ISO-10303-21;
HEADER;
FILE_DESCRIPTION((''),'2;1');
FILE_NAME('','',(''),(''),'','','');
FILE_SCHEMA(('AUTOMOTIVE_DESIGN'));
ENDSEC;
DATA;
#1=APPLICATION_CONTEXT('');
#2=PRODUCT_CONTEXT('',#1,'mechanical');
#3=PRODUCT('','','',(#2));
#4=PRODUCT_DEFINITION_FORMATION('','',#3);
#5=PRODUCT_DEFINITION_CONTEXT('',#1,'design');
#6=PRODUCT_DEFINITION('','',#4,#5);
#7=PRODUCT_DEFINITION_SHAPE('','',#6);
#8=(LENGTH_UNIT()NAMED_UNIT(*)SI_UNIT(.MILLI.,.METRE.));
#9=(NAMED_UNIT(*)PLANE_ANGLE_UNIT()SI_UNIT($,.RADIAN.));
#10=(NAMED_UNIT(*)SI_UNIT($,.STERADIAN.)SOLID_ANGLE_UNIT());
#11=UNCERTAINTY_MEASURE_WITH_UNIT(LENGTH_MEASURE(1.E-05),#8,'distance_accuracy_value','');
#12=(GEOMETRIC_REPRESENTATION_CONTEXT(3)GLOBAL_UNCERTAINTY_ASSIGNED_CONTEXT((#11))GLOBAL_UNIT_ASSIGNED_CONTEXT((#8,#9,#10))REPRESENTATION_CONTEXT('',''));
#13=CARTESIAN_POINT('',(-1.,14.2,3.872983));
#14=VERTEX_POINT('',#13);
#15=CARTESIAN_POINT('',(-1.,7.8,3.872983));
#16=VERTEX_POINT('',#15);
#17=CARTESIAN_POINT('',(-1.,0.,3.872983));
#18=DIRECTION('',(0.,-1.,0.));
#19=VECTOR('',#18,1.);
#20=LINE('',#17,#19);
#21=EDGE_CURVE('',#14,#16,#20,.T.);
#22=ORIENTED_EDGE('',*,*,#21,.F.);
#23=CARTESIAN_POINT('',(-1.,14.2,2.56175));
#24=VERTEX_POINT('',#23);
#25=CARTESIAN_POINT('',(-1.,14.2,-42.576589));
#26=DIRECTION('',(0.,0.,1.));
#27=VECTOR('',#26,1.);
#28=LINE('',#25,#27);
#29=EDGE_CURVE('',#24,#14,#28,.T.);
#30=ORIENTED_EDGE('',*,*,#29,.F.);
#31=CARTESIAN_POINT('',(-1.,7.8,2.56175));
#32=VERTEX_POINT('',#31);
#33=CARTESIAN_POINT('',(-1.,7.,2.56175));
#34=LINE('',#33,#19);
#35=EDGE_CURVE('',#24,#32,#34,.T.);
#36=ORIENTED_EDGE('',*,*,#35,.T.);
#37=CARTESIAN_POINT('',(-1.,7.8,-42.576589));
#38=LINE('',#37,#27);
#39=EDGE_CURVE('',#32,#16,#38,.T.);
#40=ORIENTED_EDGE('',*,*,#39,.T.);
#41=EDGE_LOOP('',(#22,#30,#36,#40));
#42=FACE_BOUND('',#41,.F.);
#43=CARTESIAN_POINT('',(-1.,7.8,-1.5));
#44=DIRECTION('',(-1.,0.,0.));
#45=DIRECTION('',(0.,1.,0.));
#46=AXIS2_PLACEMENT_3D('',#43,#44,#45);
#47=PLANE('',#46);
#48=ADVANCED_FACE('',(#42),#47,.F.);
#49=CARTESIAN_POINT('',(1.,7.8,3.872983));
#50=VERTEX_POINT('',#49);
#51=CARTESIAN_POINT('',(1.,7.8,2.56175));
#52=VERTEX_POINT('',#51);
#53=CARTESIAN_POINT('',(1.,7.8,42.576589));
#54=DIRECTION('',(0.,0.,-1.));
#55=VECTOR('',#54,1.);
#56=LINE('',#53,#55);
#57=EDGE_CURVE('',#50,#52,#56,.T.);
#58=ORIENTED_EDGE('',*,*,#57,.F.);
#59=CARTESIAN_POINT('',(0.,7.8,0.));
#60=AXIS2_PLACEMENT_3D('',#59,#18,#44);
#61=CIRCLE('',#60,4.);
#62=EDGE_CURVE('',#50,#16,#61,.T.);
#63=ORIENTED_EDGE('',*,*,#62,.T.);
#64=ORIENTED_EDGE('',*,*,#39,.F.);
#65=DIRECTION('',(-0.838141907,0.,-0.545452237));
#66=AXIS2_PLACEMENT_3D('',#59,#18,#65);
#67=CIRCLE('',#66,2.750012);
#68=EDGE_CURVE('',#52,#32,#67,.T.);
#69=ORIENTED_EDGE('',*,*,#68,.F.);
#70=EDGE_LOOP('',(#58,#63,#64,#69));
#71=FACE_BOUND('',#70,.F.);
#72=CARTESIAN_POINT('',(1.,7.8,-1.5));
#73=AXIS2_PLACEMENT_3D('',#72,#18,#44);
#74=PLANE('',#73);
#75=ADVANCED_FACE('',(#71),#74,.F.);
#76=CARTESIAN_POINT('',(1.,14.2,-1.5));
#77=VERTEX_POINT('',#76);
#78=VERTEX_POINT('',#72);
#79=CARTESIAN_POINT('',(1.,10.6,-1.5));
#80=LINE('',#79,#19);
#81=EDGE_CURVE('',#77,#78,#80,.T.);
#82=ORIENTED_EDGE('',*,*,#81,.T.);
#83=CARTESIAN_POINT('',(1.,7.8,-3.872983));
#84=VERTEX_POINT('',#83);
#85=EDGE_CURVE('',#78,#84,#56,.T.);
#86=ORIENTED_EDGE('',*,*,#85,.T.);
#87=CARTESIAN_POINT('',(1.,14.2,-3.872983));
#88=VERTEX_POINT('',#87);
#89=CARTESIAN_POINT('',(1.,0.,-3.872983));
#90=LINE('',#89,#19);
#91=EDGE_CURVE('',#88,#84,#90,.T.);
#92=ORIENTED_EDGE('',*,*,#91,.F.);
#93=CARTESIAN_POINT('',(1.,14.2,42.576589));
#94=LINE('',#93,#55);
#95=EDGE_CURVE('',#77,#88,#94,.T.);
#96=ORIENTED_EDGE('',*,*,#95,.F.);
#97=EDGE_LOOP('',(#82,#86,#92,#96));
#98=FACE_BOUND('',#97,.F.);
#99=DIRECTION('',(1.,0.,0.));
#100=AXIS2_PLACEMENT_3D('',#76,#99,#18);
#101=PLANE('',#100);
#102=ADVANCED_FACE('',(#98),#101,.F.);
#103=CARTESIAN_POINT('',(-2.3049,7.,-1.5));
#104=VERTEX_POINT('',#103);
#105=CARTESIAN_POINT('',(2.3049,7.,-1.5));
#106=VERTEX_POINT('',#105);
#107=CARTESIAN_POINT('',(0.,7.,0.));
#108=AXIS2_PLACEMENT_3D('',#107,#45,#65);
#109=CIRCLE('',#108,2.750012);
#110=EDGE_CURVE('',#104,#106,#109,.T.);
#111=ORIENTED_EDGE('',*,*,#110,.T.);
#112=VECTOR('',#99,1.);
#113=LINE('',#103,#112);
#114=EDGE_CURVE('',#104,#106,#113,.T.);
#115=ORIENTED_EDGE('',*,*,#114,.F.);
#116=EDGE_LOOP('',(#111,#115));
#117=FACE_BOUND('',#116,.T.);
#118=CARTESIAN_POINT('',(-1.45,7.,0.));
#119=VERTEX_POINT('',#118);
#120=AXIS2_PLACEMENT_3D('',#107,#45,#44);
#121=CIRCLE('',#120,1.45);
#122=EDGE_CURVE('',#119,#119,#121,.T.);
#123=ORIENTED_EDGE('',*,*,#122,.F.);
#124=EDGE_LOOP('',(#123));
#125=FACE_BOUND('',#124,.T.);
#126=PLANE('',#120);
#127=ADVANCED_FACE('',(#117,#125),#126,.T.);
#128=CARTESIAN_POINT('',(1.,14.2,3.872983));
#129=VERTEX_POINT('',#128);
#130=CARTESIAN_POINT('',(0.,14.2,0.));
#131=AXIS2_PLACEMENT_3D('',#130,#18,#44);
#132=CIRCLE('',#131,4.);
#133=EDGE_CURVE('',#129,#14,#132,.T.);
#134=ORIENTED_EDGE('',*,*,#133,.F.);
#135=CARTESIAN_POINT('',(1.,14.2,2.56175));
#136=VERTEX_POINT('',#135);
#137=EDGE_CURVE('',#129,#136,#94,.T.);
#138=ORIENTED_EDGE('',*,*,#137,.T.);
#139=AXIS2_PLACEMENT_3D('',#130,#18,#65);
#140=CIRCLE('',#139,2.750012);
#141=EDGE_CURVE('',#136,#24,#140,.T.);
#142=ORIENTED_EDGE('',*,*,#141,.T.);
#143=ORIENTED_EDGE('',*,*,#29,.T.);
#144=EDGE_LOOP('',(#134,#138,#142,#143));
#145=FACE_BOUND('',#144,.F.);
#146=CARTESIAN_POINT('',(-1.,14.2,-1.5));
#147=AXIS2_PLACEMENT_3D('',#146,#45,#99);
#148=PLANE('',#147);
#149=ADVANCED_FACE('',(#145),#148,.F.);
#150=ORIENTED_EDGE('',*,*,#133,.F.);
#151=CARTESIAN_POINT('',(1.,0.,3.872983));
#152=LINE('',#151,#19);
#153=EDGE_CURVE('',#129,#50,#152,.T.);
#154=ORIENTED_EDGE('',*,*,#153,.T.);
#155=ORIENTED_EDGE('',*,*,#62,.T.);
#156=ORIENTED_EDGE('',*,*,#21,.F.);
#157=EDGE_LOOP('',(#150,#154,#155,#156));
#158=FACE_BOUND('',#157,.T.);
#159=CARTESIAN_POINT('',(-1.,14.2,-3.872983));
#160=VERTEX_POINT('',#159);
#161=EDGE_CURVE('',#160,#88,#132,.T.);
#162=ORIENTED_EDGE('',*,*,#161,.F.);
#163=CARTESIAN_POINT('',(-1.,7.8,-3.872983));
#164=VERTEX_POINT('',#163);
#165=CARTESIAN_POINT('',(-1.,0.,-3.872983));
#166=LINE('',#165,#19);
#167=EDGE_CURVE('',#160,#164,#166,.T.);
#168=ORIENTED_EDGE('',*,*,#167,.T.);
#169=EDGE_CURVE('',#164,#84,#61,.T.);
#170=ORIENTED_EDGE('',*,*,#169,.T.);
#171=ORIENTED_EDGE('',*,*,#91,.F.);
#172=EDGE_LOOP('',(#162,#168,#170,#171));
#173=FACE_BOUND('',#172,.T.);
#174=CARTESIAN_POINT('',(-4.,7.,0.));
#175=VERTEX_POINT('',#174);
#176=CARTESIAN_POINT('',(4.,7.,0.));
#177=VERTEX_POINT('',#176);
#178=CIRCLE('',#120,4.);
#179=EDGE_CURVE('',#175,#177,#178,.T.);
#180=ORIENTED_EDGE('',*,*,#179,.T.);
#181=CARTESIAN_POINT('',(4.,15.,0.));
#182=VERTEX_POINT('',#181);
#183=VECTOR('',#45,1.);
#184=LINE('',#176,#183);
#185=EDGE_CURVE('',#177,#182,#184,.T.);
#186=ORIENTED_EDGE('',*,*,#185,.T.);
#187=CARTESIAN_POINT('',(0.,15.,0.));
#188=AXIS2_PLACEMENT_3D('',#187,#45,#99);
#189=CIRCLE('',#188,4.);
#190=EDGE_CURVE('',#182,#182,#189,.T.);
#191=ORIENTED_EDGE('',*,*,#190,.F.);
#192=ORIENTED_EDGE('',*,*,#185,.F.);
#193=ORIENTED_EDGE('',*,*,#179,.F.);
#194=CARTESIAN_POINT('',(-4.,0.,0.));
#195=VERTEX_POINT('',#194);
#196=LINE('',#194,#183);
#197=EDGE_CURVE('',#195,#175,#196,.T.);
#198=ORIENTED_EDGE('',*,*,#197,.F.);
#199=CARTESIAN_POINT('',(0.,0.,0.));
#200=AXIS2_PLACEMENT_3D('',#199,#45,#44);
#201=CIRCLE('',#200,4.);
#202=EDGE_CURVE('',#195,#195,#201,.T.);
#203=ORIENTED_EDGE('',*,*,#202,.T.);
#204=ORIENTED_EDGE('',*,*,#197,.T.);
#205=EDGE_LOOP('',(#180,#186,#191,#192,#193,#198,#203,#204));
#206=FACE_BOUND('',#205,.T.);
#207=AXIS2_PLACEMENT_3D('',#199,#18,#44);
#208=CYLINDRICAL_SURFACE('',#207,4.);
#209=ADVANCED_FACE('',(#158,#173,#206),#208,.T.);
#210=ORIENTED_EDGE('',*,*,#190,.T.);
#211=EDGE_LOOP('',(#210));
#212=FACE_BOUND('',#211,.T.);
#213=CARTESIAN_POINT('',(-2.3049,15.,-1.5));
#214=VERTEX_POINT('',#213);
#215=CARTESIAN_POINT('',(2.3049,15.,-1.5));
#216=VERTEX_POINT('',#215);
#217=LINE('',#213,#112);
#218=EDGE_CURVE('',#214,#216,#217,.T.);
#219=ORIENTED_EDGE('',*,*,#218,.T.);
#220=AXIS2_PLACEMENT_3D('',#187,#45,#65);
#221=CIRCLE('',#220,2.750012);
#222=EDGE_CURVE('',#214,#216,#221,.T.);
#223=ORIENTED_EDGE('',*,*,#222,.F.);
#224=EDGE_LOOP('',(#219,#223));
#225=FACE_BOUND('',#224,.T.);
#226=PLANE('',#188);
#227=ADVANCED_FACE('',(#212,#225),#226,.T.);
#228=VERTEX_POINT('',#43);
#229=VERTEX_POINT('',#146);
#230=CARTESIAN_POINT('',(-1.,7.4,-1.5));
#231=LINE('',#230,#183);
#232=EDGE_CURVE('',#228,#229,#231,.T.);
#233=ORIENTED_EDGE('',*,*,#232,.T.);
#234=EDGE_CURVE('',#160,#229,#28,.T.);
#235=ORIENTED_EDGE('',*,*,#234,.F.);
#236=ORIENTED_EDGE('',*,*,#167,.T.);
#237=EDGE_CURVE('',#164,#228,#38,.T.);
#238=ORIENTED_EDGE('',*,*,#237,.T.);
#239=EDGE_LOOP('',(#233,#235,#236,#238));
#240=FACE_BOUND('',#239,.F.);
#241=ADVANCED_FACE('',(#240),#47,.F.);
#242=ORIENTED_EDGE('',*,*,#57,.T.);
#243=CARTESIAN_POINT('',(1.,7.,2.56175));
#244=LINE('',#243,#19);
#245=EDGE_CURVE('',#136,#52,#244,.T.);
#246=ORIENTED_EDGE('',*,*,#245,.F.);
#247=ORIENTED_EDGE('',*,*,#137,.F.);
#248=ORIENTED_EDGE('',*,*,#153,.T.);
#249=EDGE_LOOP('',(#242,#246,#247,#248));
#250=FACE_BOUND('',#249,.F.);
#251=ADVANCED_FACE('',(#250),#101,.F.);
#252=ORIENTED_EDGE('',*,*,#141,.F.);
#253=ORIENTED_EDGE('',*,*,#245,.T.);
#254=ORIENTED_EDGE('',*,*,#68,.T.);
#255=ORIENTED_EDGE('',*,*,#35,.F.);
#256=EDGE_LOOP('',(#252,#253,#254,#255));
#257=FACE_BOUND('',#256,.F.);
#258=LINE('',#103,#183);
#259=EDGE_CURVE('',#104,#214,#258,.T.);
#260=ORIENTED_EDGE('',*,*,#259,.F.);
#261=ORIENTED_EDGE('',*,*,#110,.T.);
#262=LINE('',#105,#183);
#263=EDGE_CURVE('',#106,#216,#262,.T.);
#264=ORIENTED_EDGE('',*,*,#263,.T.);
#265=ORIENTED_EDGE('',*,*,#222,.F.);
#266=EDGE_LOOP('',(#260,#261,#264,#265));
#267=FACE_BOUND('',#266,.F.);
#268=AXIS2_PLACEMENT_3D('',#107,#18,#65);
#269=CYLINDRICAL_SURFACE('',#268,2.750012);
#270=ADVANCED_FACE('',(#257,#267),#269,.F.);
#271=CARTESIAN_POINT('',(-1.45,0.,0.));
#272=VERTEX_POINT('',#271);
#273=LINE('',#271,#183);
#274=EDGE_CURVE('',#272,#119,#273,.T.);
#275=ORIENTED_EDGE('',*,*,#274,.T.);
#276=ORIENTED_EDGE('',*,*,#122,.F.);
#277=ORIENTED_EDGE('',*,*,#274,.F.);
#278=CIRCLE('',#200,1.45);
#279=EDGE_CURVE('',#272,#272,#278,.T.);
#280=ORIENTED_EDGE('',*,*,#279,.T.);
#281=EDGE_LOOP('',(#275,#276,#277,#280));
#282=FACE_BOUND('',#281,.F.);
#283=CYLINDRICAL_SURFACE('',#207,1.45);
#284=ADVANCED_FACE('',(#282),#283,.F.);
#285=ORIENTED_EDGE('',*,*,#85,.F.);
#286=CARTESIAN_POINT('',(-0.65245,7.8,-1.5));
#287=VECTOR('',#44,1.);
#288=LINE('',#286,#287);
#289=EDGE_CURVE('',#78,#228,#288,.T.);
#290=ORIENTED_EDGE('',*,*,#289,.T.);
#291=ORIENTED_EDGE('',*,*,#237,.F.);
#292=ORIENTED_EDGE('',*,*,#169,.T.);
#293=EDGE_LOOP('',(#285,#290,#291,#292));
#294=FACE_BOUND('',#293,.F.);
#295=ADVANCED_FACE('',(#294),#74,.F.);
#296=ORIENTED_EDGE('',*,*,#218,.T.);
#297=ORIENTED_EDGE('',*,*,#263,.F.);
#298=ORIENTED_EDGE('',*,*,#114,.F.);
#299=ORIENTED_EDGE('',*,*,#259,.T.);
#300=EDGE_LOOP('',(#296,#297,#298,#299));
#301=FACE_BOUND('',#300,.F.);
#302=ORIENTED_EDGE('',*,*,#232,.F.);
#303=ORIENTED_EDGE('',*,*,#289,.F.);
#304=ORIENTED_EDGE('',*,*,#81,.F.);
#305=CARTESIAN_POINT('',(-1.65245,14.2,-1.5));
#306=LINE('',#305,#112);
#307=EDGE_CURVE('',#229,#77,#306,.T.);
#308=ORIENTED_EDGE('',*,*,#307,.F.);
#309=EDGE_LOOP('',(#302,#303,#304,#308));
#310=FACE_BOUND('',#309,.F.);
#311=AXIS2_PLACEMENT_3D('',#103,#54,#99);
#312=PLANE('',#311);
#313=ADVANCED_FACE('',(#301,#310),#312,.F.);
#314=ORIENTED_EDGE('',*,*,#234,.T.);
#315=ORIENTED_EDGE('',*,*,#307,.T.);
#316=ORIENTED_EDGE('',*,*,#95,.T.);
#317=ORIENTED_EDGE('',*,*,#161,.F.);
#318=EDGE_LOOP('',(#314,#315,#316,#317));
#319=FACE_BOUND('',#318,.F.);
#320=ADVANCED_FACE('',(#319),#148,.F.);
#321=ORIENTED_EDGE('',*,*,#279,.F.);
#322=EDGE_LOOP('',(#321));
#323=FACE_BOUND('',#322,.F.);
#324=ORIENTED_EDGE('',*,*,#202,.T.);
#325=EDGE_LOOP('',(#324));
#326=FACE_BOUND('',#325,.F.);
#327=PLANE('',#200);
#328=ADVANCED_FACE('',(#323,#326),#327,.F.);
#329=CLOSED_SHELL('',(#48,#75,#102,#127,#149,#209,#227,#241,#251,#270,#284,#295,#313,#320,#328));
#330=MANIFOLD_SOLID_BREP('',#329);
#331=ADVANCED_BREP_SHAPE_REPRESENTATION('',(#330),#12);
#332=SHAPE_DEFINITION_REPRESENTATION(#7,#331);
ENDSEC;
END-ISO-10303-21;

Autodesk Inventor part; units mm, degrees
ref_plane "YZ Plane" through (0, 0, 0) normal (1, 0, 0) x (0, 1, 0)
ref_plane "XZ Plane" through (0, 0, 0) normal (0, 1, 0) x (-1, 0, 0)
ref_plane "XY Plane" through (0, 0, 0) normal (0, 0, 1) x (1, 0, 0)
sketch "Esquisse1" plane through (0, 0, 0) normal (0, 1, 0) x (-1, 0, 0)
  circle A0 centre (0, 0) radius 1.45
  circle A1 centre (0, 0) radius 4
  dimension "d0" = 8
  dimension "d1" = 2.9
extrude "Extrusion1" add sketch "Esquisse1" along normal blind 7
sketch "Esquisse2" plane through (0, 7, 0) normal (0, 1, 0) x (1, 0, 0)
  circle A0 centre (0, 0) radius 1.45 projected
  circle A1 centre (0, 0) radius 4 projected
  arc A2 (-2.3049, 1.5) -> (2.3049, 1.5) centre (0, 0) ccw
  line L0 (-2.3049, 1.5) -> (2.3049, 1.5)
  arc A3 (2.3049, 1.5) -> (-2.3049, 1.5) centre (0, 0) ccw construction
  dimension "d4" = 5.5
  dimension "d5" = 1.5
extrude "Extrusion2" add sketch "Esquisse2" along normal blind 8 contours A1
sketch "Esquisse3" plane through (-2.3049, 7, -1.5) normal (0, 0, 1) x (1, 0, 0)
  line L0 (4.6098, 0) -> (0, 0) projected
  line L1 (4.6098, 0) -> (4.6098, 8) projected
  line L2 (0, 8) -> (4.6098, 8) projected
  line L3 (1.3049, 7.2) -> (3.3049, 7.2)
  line L4 (3.3049, 7.2) -> (3.3049, 0.8)
  line L5 (3.3049, 0.8) -> (1.3049, 0.8)
  line L6 (1.3049, 0.8) -> (1.3049, 7.2)
  point P0 (2.3049, -7)
  dimension "d8" = 2
  dimension "d9" = 0.8
  dimension "d10" = 0.8
  dimension "d11" = 1.3049
  dimension "d12" = 4.6098
extrude "Extrusion3" cut sketch "Esquisse3" along normal through all both and the other way through all
equation "\"d9\" = d10"
equation "\"d11\" = -0.5 * d8 + 0.5 * d12"
properties part number "axe"
